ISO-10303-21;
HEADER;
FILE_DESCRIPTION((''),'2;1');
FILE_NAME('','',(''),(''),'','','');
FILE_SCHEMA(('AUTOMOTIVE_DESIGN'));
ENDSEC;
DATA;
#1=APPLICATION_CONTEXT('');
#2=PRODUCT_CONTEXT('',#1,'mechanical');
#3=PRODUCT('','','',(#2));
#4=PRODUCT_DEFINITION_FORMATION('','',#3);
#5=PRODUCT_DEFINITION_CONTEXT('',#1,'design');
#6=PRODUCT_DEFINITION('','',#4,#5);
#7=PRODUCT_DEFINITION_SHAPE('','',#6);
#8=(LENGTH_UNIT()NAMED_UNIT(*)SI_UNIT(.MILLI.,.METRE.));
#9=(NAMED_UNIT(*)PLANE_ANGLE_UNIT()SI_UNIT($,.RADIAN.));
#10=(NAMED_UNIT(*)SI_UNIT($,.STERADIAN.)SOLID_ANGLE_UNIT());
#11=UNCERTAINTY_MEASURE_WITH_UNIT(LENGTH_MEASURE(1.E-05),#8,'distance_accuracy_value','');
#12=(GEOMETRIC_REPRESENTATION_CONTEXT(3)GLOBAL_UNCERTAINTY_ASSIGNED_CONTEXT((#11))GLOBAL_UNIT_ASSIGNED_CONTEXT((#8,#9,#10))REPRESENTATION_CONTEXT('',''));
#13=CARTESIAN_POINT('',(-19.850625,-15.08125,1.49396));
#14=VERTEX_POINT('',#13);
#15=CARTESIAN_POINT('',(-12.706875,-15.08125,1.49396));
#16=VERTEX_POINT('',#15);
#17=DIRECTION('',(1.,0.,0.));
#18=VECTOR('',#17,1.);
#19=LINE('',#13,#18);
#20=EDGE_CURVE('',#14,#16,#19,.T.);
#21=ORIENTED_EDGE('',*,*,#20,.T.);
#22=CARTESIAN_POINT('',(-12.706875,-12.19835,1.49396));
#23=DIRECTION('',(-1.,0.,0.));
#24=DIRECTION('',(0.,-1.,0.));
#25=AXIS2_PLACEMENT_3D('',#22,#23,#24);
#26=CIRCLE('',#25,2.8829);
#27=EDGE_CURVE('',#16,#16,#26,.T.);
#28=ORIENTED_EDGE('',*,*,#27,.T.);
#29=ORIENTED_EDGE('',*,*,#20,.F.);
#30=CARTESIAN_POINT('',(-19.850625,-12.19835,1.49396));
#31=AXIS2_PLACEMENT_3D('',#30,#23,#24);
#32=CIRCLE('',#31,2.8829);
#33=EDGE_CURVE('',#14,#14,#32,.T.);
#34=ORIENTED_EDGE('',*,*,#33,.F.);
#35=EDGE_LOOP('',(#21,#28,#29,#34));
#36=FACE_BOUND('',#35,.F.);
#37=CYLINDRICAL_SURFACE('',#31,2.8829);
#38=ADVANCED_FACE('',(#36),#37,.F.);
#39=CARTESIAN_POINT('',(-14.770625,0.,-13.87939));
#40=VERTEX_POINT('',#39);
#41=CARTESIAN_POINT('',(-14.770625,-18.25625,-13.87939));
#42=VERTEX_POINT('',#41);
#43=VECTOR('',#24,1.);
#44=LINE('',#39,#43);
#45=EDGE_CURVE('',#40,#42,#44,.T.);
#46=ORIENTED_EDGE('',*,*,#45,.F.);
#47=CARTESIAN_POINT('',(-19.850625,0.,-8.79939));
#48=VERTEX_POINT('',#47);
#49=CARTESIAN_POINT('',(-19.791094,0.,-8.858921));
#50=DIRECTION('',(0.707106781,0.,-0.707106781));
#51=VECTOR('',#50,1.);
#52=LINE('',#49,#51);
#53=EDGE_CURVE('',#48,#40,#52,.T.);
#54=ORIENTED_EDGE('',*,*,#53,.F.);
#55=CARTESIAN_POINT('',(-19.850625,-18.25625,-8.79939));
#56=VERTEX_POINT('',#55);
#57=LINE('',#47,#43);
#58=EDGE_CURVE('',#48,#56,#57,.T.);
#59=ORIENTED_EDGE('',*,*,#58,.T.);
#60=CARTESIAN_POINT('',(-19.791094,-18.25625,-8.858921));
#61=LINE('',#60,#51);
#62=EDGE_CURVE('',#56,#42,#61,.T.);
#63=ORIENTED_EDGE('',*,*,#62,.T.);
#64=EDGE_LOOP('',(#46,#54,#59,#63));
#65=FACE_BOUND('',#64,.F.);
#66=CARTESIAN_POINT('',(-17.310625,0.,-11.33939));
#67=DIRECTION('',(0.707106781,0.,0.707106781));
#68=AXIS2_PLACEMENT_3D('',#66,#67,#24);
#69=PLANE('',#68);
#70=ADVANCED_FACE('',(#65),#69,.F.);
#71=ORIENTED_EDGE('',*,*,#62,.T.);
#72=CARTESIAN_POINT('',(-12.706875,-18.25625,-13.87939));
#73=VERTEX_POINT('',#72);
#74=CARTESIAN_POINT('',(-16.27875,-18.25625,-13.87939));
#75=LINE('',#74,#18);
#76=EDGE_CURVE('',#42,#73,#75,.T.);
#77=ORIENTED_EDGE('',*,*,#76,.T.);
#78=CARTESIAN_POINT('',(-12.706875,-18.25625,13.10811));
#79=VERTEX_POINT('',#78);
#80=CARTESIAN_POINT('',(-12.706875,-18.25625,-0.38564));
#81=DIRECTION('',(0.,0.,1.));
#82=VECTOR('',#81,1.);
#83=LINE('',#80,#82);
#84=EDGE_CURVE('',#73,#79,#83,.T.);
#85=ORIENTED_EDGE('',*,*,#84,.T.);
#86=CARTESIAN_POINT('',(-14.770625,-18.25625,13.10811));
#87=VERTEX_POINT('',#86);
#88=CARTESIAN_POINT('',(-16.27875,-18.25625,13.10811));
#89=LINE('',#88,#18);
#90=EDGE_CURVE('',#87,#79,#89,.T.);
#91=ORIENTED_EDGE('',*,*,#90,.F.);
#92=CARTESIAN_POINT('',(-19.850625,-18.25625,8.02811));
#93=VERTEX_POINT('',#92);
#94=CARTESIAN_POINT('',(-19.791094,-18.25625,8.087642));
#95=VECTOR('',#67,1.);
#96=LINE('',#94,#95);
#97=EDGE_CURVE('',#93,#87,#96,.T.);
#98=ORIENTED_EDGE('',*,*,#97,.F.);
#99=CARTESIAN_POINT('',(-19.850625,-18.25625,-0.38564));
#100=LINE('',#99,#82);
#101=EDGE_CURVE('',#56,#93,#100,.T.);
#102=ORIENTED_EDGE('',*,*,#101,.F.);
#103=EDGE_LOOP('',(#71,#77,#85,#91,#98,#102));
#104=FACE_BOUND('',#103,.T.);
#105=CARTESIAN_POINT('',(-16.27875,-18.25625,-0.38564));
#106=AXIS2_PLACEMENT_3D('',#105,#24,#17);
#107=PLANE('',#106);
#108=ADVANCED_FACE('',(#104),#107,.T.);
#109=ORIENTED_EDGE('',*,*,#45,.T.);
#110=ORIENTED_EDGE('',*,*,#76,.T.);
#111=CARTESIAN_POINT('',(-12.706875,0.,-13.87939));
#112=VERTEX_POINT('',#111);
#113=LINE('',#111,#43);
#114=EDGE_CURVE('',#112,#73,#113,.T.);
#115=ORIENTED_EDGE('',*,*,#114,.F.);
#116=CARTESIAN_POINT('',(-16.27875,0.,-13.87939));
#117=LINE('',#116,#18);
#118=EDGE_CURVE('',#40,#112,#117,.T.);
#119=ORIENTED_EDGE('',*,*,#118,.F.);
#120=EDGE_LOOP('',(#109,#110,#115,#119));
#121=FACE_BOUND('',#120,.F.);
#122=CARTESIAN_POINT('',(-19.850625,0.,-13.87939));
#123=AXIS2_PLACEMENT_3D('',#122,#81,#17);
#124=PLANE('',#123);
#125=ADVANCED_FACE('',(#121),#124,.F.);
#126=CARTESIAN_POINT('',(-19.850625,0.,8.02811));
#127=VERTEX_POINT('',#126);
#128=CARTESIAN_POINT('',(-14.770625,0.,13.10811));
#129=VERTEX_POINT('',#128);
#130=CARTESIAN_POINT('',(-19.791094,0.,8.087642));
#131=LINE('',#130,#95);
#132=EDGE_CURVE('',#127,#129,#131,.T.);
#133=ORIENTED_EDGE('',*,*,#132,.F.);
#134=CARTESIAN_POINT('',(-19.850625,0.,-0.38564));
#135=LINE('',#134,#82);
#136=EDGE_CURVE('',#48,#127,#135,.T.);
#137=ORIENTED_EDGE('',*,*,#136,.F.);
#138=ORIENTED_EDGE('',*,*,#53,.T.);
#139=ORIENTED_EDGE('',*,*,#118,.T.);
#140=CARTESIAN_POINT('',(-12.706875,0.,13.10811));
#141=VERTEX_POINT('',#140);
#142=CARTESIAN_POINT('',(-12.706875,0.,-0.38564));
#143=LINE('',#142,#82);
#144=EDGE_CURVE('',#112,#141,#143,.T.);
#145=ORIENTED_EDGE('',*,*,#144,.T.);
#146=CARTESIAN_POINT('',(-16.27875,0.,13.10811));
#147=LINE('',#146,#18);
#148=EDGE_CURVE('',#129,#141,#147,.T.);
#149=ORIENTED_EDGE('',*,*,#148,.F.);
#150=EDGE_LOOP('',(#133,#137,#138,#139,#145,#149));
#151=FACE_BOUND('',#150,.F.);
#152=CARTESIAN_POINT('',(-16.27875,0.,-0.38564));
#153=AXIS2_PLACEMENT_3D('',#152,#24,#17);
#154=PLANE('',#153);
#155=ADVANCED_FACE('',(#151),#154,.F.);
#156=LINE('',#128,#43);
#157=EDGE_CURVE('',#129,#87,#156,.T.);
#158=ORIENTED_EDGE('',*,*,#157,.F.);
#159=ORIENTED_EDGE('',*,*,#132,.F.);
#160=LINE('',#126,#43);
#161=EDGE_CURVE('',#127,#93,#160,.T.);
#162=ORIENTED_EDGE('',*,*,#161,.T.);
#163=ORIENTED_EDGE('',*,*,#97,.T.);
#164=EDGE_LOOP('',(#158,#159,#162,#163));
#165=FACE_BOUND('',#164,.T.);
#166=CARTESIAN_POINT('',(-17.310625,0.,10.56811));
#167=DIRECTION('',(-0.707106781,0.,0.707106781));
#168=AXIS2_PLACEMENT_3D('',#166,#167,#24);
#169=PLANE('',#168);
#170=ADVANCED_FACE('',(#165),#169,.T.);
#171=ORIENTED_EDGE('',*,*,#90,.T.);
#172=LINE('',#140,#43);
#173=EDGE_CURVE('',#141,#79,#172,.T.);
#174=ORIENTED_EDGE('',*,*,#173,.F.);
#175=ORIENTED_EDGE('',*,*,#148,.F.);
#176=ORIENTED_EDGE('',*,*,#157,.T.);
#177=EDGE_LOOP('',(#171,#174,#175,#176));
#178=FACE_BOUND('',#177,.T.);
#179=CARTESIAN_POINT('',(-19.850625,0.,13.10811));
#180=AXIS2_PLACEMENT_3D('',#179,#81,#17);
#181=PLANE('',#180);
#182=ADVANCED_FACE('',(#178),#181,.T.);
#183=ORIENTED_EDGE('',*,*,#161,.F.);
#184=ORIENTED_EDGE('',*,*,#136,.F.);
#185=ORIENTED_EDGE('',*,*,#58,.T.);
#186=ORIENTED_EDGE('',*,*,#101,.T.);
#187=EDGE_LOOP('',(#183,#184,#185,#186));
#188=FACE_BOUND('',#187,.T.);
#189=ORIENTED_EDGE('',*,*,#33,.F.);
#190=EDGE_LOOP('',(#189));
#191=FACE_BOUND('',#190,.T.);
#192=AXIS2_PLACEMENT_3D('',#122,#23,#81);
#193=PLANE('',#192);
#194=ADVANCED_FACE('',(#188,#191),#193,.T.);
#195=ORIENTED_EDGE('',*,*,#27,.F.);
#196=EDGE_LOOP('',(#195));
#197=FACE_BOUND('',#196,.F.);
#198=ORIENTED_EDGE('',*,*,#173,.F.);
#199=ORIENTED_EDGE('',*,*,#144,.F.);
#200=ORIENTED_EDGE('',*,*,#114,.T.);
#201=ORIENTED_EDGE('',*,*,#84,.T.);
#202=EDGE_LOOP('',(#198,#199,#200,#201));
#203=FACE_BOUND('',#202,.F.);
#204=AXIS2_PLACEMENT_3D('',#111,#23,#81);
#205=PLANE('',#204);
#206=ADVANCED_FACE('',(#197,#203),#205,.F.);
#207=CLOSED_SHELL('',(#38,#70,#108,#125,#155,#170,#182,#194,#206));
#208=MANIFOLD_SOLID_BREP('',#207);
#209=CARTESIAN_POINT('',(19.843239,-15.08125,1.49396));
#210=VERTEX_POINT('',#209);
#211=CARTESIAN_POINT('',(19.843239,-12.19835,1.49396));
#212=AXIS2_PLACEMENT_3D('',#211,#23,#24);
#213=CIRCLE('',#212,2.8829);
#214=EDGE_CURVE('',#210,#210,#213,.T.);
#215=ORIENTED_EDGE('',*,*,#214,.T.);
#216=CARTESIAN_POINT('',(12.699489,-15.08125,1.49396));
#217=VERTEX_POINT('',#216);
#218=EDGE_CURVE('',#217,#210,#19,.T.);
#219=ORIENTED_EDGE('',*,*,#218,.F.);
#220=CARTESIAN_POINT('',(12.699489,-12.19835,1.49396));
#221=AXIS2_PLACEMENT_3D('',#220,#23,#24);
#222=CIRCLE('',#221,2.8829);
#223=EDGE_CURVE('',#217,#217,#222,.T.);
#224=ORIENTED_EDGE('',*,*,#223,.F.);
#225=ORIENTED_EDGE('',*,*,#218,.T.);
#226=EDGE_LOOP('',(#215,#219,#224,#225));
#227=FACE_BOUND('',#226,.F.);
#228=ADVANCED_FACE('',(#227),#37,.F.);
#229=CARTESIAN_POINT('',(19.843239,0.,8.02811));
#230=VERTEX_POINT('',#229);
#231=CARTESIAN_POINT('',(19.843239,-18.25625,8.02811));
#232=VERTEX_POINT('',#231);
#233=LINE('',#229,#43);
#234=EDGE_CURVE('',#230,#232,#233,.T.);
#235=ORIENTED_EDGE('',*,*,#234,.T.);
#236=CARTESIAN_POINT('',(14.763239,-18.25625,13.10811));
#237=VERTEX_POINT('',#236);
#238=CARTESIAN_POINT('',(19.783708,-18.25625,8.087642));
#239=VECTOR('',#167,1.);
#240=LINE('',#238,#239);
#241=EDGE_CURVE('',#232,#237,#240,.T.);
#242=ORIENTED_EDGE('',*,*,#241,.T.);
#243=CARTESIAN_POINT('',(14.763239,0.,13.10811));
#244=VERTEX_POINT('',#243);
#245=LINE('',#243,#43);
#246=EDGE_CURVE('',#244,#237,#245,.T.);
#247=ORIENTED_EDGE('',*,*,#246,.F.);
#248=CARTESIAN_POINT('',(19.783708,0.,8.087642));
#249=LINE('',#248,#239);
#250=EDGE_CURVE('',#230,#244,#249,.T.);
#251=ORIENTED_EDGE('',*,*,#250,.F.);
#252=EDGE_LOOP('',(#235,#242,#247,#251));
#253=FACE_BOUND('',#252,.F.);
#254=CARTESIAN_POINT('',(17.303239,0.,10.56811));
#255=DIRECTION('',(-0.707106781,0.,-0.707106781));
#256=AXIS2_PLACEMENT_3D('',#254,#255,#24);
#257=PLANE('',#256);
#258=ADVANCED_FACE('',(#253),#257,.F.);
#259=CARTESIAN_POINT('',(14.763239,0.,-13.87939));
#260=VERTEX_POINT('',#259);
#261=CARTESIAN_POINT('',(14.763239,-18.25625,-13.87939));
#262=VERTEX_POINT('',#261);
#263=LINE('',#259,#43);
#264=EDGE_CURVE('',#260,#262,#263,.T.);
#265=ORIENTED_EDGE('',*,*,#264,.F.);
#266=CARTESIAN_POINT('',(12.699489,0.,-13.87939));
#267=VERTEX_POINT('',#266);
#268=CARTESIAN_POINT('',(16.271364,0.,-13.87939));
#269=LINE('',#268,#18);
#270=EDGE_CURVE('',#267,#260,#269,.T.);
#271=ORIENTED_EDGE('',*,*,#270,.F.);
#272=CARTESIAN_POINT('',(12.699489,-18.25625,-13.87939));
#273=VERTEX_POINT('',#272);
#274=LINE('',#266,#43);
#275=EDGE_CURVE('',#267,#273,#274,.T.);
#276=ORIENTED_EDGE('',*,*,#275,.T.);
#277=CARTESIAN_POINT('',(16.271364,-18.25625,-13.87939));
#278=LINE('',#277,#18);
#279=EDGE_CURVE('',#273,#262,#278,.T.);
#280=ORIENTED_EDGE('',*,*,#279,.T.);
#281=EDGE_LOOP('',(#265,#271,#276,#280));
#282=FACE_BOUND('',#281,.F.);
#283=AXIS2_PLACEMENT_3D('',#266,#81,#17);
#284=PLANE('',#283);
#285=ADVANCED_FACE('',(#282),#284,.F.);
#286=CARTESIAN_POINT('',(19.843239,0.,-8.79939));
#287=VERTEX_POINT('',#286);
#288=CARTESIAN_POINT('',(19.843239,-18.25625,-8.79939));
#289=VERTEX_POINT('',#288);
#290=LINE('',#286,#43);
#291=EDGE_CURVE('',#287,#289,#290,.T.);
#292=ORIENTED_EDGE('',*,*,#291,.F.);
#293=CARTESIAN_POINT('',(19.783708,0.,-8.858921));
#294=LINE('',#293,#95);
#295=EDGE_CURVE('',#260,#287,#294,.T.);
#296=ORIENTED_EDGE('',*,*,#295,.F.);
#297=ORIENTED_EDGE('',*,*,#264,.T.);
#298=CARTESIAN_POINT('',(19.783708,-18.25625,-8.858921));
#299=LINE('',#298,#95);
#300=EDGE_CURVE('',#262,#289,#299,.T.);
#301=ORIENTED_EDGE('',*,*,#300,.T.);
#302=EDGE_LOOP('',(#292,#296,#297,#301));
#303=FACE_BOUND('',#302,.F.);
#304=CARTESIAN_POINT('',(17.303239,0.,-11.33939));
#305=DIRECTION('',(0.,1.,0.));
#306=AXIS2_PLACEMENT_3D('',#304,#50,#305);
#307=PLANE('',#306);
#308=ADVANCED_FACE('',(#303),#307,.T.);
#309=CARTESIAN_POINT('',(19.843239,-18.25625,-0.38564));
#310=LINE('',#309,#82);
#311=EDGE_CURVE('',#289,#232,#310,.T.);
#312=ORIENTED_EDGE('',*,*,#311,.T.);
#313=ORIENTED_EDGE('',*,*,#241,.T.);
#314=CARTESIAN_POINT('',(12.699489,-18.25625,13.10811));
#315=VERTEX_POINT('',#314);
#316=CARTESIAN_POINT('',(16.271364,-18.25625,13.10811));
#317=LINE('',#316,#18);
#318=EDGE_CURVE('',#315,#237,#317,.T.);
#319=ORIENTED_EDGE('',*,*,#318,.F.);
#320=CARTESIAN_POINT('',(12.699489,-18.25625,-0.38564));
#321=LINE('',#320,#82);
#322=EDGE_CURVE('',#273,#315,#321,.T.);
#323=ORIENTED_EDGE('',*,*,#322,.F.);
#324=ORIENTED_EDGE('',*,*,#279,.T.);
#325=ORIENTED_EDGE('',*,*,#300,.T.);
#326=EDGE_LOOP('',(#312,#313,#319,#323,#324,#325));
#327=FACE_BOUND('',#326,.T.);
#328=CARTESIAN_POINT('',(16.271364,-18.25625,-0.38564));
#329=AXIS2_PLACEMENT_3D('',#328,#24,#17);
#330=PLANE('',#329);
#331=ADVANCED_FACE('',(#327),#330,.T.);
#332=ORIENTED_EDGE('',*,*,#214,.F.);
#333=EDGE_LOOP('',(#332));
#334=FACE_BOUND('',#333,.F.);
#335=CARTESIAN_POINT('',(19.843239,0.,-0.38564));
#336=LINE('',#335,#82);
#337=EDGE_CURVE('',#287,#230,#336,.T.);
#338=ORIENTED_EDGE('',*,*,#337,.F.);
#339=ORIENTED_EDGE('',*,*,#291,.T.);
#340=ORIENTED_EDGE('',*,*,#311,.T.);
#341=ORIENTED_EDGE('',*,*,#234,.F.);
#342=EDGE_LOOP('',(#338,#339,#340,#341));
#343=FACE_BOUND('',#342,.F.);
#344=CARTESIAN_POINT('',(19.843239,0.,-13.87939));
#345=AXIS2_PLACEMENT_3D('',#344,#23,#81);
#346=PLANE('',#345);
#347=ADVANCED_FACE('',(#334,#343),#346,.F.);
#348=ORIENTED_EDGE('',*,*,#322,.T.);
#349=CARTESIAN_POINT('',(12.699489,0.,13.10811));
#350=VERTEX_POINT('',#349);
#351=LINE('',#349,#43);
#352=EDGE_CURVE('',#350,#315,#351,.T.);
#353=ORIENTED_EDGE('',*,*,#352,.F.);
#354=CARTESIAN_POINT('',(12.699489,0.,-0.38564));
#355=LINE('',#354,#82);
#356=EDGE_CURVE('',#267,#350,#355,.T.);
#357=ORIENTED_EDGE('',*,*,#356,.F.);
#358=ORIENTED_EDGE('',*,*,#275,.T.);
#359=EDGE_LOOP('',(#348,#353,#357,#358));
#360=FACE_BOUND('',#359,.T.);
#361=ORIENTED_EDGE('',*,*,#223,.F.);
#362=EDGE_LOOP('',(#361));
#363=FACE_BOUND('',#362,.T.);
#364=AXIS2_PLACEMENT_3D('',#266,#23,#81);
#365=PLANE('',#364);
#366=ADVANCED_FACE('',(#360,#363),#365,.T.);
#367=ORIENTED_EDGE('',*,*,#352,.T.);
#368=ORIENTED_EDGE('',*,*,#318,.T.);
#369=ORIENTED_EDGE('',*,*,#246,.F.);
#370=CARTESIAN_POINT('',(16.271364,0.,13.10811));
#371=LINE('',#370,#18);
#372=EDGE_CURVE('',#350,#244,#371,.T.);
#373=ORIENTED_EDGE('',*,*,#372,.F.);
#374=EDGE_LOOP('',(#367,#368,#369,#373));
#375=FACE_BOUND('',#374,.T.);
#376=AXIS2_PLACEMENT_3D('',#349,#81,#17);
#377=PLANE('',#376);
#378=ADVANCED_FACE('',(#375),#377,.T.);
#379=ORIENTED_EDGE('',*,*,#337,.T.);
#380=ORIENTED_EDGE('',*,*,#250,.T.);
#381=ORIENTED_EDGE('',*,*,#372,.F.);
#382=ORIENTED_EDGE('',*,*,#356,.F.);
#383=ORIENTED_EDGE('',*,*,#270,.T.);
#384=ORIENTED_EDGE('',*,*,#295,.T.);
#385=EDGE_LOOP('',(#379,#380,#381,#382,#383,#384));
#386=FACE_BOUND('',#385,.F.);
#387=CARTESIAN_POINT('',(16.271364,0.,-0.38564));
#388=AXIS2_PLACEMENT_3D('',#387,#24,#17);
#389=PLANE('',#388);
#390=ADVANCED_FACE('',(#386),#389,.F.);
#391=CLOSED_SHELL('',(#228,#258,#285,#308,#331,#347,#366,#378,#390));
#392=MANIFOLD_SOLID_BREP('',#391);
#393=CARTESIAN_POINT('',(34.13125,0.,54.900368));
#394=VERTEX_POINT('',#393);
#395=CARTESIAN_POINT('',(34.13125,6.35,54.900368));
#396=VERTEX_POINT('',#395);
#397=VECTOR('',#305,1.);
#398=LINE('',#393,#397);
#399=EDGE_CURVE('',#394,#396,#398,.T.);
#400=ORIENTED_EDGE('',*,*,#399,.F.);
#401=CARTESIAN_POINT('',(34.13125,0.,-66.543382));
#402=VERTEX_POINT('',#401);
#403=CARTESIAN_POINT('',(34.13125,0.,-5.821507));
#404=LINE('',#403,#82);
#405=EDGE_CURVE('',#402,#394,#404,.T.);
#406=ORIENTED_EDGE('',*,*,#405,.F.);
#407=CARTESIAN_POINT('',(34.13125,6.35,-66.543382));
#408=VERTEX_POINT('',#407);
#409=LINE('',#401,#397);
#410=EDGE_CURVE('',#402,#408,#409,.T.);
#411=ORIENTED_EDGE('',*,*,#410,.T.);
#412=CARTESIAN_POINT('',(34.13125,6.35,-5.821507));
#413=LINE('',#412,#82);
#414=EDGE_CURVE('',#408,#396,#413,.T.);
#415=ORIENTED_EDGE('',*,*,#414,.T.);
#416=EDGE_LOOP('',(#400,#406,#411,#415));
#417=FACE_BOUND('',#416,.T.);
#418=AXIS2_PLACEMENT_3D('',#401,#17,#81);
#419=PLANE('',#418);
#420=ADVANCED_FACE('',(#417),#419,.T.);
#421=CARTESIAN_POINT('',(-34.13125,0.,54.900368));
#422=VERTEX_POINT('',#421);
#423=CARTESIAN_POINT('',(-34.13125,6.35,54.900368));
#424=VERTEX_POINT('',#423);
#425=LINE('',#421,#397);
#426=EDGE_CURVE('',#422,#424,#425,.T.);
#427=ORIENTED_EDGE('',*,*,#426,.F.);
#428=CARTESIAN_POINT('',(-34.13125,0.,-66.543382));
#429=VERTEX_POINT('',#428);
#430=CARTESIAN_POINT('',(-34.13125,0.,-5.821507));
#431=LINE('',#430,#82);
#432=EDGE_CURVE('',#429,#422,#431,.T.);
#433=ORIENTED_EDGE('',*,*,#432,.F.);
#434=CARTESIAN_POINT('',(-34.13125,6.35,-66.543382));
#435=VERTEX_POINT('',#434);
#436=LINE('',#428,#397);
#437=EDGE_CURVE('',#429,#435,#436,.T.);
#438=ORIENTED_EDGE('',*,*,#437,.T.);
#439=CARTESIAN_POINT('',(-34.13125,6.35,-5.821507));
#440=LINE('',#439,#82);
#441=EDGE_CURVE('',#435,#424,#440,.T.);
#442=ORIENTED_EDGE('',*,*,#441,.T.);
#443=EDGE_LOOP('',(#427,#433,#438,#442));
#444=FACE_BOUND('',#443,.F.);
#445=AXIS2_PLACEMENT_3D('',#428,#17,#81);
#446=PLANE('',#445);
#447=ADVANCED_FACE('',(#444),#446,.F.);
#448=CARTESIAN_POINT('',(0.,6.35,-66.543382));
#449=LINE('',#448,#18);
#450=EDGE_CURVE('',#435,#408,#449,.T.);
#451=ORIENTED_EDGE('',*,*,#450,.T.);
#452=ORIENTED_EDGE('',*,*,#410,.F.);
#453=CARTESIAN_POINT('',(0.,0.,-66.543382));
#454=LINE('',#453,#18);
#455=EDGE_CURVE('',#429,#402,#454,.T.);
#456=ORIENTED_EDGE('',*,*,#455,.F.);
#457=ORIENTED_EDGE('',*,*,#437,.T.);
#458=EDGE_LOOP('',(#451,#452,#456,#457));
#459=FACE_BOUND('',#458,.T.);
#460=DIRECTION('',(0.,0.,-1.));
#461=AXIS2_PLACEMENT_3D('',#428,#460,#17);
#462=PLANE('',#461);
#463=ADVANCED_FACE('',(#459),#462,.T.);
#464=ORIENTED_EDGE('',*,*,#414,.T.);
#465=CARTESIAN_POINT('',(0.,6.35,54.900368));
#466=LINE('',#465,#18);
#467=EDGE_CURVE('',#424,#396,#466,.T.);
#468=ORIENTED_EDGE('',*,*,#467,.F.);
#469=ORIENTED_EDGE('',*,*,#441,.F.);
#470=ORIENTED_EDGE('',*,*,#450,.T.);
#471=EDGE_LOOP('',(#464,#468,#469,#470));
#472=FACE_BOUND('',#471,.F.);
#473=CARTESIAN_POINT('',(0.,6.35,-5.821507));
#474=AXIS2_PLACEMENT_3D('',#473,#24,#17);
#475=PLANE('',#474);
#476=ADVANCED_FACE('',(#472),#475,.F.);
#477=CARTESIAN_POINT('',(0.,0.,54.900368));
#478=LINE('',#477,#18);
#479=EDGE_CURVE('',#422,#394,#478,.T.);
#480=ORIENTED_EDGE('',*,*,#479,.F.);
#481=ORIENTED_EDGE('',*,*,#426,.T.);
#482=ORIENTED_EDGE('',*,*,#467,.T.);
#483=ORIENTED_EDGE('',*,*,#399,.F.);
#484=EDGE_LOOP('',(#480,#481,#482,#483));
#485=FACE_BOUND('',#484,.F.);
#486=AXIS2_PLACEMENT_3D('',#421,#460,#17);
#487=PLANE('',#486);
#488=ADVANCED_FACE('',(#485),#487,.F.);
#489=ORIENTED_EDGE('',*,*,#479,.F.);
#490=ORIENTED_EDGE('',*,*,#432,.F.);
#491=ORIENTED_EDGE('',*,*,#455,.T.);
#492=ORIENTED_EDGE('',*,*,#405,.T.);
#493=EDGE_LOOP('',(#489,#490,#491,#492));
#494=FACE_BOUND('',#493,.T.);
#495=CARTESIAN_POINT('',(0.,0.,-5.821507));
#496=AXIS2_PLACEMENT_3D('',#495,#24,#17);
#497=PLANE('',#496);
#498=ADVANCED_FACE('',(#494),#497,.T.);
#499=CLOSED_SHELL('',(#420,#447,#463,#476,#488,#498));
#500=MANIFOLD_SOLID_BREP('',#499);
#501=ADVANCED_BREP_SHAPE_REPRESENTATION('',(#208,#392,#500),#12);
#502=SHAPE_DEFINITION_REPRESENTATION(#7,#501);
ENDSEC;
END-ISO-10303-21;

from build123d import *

# Parameters (mm, degrees)
F1_W      = 7.14375
F1_H      = 26.9875
F2_DEPTH  = 18.25625
F3_SIZE   = 5.08
F3_2_SIZE = 5.08
F4_R      = 2.8829
F5_DEPTH  = 50.8
F0_W      = 68.2625
F0_H      = 121.44375
F6_DEPTH  = 6.35


# Not quite as in the source:
# - a length typed as a fraction of an inch, garbled in the dataset ("3 / 203.2 mm" for 3/8 in), is restored


with BuildPart() as f2:
    # F1 (on Front) → F2 (new body)
    with BuildSketch(Plane.XZ):
        with Locations((16.2713638617, -0.3856395021)):
            Rectangle(F1_W, F1_H)
    extrude(amount=F2_DEPTH)

    # F3#2
    f3_2_edges = [f2.edges().sort_by_distance(p)[0] for p in [
        (19.843239, -9.128125, 13.10811),
        (19.843239, -9.128125, -13.87939),
    ]]
    chamfer(f3_2_edges, length=F3_2_SIZE)


with BuildPart() as f2b:
    # F1 (on Front) → F2, piece 2 (new body)
    with BuildSketch(Plane.XZ):
        with Locations((-16.2787499154, -0.3856395021)):
            Rectangle(F1_W, F1_H)
    extrude(amount=F2_DEPTH)

    # F3
    f3_edges = [f2b.edges().sort_by_distance(p)[0] for p in [
        (-19.850625, -9.128125, 13.10811),
        (-19.850625, -9.128125, -13.87939),
    ]]
    chamfer(f3_edges, length=F3_SIZE)


with BuildPart() as f5_tool:
    # F4 (on face) → F5 (new body)
    with BuildSketch(Plane(origin=(-19.8506249154, 0, 0), x_dir=(0, -1, 0), z_dir=(-1, 0, 0))):
        with Locations((12.19835, 1.4939604979)):
            Circle(F4_R)
    extrude(amount=-F5_DEPTH)


with BuildPart() as f2_1:
    add(f2.part)

    # F5: cut by f5_tool
    add(f5_tool.part, mode=Mode.SUBTRACT)


with BuildPart() as f2b_1:
    add(f2b.part)

    # F5: cut by f5_tool
    add(f5_tool.part, mode=Mode.SUBTRACT)


with BuildPart() as f6:
    # F0 (on Front) → F6 (new body)
    with BuildSketch(Plane.XZ):
        with Locations((0, -5.8215066612)):
            Rectangle(F0_W, F0_H)
    extrude(amount=-F6_DEPTH)


solid = Compound([f2_1.part, f2b_1.part, f6.part])
